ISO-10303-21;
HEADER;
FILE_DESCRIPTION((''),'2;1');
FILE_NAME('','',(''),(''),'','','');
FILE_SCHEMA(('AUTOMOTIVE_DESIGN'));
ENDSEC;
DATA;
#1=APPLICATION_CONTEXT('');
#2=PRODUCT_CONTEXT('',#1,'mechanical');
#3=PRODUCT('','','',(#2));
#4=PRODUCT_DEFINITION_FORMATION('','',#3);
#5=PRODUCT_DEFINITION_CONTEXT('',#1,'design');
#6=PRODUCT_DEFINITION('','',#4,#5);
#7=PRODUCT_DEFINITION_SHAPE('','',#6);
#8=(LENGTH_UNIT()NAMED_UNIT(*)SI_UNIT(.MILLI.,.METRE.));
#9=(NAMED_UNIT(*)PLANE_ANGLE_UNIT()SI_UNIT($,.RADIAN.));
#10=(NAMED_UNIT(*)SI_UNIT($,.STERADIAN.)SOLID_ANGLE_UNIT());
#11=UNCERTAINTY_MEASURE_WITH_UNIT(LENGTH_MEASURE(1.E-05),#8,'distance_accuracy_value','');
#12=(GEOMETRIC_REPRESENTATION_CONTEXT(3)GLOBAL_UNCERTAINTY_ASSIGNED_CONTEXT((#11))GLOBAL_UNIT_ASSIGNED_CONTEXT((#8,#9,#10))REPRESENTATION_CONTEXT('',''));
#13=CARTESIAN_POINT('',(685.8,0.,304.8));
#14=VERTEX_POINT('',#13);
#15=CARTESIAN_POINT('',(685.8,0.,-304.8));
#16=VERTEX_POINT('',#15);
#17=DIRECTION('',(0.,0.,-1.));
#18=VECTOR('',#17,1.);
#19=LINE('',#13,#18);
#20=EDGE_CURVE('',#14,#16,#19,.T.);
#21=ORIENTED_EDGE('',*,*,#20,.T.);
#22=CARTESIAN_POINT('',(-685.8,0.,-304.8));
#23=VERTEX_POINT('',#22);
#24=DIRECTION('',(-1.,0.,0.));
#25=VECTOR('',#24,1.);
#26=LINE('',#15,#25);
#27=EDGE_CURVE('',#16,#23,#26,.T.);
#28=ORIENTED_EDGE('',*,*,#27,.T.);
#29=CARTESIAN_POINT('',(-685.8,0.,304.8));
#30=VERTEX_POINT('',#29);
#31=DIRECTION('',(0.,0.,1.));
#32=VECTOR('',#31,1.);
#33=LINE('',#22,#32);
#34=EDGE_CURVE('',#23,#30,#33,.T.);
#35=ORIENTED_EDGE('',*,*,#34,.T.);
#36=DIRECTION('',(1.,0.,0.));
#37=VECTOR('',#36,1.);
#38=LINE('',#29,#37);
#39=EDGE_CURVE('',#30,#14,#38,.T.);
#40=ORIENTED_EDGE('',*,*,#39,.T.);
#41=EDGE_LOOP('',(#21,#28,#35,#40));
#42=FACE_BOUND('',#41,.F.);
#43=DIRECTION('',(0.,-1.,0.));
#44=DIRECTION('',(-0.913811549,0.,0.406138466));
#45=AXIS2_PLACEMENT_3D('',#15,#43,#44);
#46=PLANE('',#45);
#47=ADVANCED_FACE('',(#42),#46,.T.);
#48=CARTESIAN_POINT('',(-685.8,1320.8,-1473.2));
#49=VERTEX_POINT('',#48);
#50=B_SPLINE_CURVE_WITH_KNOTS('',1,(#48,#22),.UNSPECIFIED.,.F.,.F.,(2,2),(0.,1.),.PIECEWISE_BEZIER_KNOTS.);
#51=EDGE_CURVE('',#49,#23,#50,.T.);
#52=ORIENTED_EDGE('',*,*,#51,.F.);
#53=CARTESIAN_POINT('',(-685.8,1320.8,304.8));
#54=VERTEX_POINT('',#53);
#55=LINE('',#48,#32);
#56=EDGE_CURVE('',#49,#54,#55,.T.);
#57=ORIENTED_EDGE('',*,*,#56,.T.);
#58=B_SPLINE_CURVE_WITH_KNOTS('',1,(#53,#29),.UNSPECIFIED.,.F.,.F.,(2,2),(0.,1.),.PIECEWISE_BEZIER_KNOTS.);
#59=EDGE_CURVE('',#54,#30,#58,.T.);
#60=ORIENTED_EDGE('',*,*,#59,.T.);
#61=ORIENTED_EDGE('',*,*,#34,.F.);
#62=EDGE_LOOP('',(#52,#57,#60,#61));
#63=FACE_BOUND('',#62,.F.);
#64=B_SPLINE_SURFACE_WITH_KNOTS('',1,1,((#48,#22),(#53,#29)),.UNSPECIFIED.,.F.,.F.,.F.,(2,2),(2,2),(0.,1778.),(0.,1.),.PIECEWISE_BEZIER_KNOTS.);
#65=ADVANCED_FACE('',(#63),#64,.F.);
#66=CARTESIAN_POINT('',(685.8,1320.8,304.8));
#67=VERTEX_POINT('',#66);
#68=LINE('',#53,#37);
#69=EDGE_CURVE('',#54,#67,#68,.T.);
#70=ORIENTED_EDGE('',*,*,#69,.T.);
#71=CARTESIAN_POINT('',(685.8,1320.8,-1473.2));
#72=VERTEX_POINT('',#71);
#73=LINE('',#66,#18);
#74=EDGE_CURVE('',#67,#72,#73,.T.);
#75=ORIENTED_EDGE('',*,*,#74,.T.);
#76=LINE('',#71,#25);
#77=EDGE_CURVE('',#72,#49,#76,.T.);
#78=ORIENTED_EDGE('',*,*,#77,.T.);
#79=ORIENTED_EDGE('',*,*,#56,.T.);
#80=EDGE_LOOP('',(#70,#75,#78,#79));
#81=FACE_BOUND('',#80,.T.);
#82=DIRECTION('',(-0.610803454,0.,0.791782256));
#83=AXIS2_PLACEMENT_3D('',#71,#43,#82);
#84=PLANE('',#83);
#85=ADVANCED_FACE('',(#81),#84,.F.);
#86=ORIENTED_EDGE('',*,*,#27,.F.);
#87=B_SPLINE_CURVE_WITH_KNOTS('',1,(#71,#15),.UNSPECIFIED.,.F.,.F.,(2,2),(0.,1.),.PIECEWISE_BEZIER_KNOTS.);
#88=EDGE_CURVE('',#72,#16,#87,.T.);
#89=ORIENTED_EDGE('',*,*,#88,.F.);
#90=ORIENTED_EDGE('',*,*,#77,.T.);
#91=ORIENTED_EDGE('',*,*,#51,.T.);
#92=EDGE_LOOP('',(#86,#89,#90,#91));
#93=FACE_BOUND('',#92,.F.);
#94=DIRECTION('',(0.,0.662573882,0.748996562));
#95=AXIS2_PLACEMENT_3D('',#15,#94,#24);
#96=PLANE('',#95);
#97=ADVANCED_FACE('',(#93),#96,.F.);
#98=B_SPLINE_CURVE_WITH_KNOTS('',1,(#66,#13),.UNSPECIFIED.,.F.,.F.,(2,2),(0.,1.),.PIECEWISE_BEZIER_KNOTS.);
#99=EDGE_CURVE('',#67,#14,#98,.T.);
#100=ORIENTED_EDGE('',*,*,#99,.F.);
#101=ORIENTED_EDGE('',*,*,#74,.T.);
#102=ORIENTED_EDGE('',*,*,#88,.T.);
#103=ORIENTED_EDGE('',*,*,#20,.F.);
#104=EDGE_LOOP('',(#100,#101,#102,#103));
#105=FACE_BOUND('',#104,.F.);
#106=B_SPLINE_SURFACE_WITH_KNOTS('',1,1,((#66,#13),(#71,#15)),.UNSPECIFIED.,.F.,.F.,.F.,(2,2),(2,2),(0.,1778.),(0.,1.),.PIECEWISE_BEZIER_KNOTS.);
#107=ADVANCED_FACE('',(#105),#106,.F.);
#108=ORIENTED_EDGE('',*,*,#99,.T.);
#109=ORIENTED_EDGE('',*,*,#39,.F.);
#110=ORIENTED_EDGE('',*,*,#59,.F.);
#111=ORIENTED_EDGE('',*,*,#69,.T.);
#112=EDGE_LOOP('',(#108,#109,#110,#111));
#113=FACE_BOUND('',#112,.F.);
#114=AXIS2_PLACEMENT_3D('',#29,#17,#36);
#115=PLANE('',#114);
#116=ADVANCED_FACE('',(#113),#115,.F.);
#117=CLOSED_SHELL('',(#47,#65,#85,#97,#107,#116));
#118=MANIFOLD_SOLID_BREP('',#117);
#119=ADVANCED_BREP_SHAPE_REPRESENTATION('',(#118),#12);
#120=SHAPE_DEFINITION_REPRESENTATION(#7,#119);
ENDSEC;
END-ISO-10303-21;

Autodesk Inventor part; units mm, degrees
ref_plane "YZ Plane" through (0, 0, 0) normal (1, 0, 0) x (0, 1, 0)
ref_plane "XY Plane" through (0, 0, 0) normal (0, 0, 1) x (1, 0, 0)
sketch "Sketch1" plane through (0, 0, 0) normal (0, 1, 0) x (-1, 0, 0)
  line L0 (685.8, 304.8) -> (-685.8, 304.8)
  line L1 (-685.8, 304.8) -> (-685.8, -304.8)
  line L2 (-685.8, -304.8) -> (685.8, -304.8)
  line L3 (685.8, -304.8) -> (685.8, 304.8)
  line L4 (0, -426.72) -> (0, 426.72) projected
  line L5 (-960.12, 0) -> (960.12, 0) projected
  line L6 (960.12, 0) -> (-960.12, 0) projected
  line L7 (0, -426.72) -> (0, 426.72) projected
  point P0 (0, 0)
  dimension "d0" = 1371.6
  dimension "d1" = 609.6
ref_plane "Work Plane1" through (0, 1320.8, 0) normal (0, 1, 0) x (-1, 0, 0)
sketch "Sketch2" plane through (0, 1320.8, 0) normal (0, 1, 0) x (-1, 0, 0)
  line L0 (685.8, -304.8) -> (685.8, 304.8) projected
  line L1 (685.8, 304.8) -> (-685.8, 304.8) projected
  line L2 (685.8, 304.8) -> (-685.8, 304.8)
  line L3 (-685.8, 304.8) -> (-685.8, -1473.2)
  line L4 (-685.8, -1473.2) -> (685.8, -1473.2)
  line L5 (685.8, -1473.2) -> (685.8, 304.8)
  point P0 (0, 0)
  dimension "d3" = 1371.6
  dimension "d4" = 1778
sketch "Sketch2 outline for Loft1" plane through (0, 1320.8, 0) normal (0, 1, 0) x (-1, 0, 0)
  line L0 (685.8, -1473.2) -> (685.8, 304.8)
  line L1 (-685.8, -1473.2) -> (685.8, -1473.2)
  line L2 (-685.8, 304.8) -> (-685.8, -1473.2)
  line L3 (685.8, 304.8) -> (-685.8, 304.8)
sketch "Sketch1 outline for Loft1" plane through (0, 0, 0) normal (0, 1, 0) x (-1, 0, 0)
  line L0 (685.8, -304.8) -> (685.8, 304.8)
  line L1 (-685.8, -304.8) -> (685.8, -304.8)
  line L2 (-685.8, 304.8) -> (-685.8, -304.8)
  line L3 (685.8, 304.8) -> (-685.8, 304.8)
loft "Loft1" add profiles "Sketch2 outline for Loft1", "Sketch1 outline for Loft1"
properties part number "SouthEastWallBlockAngle"
